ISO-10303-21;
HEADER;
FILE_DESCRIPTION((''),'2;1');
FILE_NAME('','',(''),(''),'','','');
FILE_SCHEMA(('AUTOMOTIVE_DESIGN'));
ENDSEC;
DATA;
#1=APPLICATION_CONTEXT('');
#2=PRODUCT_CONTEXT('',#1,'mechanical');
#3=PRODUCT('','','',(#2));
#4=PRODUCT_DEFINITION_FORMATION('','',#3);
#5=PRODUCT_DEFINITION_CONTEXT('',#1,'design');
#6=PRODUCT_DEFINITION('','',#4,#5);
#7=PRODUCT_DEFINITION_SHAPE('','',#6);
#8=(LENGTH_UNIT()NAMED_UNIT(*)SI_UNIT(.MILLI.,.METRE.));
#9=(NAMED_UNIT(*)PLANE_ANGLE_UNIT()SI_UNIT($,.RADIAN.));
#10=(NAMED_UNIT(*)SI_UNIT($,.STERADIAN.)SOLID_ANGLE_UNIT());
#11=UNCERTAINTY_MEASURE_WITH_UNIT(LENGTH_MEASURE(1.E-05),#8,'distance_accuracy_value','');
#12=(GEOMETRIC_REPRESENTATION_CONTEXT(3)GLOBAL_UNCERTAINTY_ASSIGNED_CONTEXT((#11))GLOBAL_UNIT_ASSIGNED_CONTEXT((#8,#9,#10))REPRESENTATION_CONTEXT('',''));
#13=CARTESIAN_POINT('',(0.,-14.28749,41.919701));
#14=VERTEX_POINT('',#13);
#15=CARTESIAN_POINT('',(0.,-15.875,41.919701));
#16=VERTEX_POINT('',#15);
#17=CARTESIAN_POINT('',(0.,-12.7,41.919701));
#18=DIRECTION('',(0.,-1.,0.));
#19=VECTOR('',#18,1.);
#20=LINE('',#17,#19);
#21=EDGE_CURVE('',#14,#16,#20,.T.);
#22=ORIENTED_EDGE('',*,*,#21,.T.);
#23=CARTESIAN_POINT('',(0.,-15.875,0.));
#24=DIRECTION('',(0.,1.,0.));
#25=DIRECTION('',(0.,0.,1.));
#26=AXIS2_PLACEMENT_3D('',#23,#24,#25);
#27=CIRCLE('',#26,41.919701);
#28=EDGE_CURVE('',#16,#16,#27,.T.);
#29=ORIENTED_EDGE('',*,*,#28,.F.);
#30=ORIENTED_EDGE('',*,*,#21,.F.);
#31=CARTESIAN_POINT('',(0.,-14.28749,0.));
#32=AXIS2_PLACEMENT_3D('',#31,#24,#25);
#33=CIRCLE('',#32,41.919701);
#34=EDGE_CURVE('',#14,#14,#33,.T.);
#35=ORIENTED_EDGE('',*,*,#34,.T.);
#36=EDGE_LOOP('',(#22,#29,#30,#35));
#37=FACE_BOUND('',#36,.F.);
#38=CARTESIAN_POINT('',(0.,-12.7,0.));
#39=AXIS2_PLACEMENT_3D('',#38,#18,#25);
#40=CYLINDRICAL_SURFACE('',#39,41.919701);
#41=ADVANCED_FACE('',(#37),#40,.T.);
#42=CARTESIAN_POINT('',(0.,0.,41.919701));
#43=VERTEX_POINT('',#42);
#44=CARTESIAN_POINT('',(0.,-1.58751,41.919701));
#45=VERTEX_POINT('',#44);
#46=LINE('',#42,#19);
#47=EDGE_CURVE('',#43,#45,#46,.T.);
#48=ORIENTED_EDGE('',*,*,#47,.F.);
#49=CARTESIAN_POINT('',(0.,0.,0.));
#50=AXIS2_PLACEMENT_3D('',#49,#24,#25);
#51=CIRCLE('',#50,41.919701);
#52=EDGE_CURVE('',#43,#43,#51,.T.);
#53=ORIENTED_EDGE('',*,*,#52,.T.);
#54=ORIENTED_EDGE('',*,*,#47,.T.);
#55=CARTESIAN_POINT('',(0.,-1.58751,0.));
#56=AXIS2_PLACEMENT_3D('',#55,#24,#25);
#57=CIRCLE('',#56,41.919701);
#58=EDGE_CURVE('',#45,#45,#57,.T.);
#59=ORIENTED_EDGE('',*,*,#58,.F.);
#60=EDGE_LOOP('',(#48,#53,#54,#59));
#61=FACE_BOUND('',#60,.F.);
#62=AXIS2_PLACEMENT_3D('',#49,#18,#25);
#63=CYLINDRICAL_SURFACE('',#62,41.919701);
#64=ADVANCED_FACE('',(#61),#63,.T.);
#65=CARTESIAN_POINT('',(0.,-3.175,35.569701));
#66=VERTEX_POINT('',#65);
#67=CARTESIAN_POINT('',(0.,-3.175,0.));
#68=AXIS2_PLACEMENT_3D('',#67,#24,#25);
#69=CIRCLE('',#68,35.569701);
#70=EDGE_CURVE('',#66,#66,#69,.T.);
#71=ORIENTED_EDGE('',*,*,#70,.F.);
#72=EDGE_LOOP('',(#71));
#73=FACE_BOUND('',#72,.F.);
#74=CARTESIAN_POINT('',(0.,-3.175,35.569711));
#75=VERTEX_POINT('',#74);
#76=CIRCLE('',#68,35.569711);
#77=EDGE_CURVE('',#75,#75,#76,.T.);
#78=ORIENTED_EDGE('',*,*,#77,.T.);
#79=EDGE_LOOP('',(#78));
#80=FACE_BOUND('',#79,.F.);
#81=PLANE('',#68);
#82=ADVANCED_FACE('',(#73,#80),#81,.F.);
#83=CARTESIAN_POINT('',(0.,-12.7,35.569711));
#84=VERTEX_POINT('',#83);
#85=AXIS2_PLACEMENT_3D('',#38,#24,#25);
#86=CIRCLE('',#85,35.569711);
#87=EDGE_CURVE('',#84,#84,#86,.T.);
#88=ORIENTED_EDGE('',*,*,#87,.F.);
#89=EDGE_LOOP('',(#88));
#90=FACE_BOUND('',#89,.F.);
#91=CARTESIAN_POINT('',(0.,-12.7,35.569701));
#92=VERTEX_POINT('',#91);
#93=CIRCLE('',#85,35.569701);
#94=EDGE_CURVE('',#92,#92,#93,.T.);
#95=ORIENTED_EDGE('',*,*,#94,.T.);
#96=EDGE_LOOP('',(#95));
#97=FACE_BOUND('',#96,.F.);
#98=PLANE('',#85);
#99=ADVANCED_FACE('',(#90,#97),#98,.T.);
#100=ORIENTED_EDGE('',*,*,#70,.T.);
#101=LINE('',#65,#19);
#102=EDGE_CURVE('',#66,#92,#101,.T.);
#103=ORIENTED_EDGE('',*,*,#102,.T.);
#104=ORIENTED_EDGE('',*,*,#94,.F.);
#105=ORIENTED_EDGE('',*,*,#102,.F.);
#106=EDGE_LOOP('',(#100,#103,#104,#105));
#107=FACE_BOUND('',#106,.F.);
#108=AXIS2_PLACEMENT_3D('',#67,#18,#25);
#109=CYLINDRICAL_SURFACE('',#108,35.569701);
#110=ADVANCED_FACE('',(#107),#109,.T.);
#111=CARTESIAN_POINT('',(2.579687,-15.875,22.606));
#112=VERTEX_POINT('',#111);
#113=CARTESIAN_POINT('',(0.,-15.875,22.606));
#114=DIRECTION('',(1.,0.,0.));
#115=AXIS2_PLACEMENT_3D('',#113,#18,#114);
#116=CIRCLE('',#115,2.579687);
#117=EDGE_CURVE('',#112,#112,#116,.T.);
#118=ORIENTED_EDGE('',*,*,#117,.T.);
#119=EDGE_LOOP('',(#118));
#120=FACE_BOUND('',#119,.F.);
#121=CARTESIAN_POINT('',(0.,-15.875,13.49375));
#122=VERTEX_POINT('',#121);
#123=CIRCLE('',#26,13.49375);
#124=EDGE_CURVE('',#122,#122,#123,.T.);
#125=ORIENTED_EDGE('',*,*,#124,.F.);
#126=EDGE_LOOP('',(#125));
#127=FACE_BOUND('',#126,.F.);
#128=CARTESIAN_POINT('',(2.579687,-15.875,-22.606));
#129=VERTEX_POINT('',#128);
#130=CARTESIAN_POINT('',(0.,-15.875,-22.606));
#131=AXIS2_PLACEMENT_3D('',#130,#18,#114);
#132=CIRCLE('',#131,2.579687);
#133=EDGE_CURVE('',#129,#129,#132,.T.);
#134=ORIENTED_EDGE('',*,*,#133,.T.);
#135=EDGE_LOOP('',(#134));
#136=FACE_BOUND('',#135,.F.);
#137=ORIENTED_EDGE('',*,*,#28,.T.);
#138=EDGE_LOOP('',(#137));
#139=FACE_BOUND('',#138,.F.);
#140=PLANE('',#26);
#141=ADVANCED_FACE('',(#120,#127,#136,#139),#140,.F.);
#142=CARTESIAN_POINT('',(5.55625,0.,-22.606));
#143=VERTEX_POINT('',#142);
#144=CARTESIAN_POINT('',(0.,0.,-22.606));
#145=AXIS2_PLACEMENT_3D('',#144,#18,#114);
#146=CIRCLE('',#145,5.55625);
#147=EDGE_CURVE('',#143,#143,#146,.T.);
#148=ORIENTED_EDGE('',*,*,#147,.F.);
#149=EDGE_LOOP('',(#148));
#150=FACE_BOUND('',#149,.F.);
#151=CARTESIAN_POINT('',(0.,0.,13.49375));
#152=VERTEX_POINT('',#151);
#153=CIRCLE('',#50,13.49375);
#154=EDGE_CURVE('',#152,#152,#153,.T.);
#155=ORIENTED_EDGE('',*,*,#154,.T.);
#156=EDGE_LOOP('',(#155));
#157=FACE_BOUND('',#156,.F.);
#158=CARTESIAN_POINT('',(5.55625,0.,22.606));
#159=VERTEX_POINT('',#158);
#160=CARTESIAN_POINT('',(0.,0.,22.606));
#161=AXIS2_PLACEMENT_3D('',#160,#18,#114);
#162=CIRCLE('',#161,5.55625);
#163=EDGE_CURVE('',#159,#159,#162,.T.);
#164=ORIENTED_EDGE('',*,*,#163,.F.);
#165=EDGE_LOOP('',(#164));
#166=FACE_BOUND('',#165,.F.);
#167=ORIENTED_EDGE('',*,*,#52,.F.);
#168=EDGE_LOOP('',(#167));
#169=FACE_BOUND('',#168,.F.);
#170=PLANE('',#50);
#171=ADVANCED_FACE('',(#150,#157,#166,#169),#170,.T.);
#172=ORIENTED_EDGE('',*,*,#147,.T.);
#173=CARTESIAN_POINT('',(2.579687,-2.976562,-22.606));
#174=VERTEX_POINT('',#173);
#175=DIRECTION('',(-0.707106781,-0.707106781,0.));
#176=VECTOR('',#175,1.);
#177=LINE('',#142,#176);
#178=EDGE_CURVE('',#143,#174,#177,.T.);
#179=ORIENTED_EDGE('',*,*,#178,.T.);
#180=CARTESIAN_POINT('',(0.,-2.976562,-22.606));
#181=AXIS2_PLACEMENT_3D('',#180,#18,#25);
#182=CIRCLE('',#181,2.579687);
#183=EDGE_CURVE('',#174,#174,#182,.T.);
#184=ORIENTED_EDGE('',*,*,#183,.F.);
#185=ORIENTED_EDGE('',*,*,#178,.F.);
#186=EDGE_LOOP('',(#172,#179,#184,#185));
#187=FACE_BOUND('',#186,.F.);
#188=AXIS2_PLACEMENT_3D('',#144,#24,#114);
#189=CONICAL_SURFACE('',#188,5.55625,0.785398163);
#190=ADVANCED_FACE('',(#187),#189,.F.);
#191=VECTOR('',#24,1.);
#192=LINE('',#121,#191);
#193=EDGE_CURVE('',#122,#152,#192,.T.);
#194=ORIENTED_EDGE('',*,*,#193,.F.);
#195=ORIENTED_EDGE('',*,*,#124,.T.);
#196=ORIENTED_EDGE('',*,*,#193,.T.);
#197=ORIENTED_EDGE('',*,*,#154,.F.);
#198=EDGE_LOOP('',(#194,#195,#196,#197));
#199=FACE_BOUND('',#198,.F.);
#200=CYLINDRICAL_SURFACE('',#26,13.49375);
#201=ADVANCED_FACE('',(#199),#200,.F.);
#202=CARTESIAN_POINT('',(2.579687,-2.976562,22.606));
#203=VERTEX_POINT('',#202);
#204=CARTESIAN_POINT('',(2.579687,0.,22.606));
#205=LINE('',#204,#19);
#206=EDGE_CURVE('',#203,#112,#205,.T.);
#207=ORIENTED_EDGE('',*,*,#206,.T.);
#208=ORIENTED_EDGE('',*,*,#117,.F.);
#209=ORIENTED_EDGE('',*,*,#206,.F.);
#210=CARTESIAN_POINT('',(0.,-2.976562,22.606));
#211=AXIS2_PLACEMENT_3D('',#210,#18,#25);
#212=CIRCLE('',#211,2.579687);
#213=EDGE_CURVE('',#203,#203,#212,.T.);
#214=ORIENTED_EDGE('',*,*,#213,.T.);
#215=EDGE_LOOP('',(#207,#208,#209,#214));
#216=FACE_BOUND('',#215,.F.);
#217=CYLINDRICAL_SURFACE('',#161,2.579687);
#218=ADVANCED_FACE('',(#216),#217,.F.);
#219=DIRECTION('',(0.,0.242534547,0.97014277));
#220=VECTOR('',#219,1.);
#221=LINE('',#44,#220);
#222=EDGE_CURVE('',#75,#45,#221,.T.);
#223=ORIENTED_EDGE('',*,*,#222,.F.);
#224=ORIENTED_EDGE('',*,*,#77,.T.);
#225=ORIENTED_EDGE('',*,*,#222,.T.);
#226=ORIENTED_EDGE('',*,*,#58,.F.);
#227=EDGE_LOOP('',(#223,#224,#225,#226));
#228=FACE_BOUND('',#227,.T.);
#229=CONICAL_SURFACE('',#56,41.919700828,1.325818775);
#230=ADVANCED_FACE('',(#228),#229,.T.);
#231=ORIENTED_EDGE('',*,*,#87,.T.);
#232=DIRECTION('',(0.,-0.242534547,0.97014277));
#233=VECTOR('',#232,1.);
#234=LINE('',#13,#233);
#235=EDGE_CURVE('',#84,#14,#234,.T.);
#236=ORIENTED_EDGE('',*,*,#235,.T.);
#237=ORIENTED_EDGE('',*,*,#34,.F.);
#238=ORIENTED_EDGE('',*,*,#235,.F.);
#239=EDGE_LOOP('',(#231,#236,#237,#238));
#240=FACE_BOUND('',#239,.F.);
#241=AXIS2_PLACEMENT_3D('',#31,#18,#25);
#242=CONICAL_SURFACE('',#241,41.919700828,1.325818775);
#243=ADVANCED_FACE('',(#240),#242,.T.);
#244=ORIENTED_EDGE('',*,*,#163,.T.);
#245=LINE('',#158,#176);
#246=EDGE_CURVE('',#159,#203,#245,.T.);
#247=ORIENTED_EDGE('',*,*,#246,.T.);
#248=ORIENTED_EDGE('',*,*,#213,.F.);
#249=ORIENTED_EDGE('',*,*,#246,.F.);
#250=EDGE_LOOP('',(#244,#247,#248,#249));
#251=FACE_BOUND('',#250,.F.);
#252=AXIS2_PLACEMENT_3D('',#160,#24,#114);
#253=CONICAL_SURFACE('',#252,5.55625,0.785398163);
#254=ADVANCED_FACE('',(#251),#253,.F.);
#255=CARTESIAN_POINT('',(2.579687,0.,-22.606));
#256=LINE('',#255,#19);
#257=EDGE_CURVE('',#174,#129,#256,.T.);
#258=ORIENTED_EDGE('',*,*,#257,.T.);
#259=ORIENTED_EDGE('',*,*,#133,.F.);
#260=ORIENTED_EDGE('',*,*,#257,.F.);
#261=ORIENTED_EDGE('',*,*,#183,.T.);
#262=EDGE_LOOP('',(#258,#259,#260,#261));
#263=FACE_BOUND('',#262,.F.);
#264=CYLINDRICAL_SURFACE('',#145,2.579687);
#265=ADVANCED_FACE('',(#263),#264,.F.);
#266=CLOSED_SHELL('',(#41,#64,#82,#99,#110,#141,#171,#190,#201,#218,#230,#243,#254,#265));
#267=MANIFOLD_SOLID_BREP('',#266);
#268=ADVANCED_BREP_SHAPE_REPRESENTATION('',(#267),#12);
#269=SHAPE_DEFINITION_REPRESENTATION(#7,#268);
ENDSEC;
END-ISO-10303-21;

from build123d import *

# Parameters (mm, degrees)
F2_SIZE2       = 1.58749
F2_SIZE        = 6.34999
F3_SIZE2       = 1.58749
F3_SIZE        = 6.34999
F5_D           = 5.159375
F5_CSINK_D     = 11.1125
F5_CSINK_ANGLE = 90


# Not quite as in the source:
# - a fillet or chamfer is up to 0.001 mm smaller than in the source, because OpenCascade refuses the exact size


with BuildPart() as f1:
    # F0 (on Right) → F1 (revolve)
    with BuildSketch(Plane.YZ):
        Polygon((-15.875, 13.49375), (0, 13.49375), (0, 41.9197008275), (-3.175, 41.9197008275), (-3.175, 35.5697008275), (-12.7, 35.5697008275), (-12.7, 41.9197008275), (-15.875, 41.9197008275), align=None)
    revolve(axis=Axis((0, -7.9375, 0), (0, 1, 0)))

    # F2 (size 6.35 and 1.5875 in the source; OpenCascade refuses exactly that, so slightly less here)
    f2_edges = [f1.edges().sort_by_distance(p)[0] for p in [
        (0, -12.7, -41.919701),
    ]]
    f2_side = f1.faces().sort_by_distance((0, -12.7, -36.755369))[0]
    chamfer(f2_edges, length=F2_SIZE, length2=F2_SIZE2, reference=f2_side)

    # F3 (size 6.35 and 1.5875 in the source; OpenCascade refuses exactly that, so slightly less here)
    f3_edges = [f1.edges().sort_by_distance(p)[0] for p in [
        (0, -3.175, -41.919701),
    ]]
    chamfer(f3_edges, length=F3_SIZE, length2=F3_SIZE2)

    # F5 (through all)
    with Locations(Plane(origin=(0, 0, 0), x_dir=(-1, 0, 0), z_dir=(0, 1, 0))):
        with Locations((0, 22.606), (0, -22.606)):
            CounterSinkHole(F5_D / 2, F5_CSINK_D / 2, counter_sink_angle=F5_CSINK_ANGLE)


solid = f1.part
